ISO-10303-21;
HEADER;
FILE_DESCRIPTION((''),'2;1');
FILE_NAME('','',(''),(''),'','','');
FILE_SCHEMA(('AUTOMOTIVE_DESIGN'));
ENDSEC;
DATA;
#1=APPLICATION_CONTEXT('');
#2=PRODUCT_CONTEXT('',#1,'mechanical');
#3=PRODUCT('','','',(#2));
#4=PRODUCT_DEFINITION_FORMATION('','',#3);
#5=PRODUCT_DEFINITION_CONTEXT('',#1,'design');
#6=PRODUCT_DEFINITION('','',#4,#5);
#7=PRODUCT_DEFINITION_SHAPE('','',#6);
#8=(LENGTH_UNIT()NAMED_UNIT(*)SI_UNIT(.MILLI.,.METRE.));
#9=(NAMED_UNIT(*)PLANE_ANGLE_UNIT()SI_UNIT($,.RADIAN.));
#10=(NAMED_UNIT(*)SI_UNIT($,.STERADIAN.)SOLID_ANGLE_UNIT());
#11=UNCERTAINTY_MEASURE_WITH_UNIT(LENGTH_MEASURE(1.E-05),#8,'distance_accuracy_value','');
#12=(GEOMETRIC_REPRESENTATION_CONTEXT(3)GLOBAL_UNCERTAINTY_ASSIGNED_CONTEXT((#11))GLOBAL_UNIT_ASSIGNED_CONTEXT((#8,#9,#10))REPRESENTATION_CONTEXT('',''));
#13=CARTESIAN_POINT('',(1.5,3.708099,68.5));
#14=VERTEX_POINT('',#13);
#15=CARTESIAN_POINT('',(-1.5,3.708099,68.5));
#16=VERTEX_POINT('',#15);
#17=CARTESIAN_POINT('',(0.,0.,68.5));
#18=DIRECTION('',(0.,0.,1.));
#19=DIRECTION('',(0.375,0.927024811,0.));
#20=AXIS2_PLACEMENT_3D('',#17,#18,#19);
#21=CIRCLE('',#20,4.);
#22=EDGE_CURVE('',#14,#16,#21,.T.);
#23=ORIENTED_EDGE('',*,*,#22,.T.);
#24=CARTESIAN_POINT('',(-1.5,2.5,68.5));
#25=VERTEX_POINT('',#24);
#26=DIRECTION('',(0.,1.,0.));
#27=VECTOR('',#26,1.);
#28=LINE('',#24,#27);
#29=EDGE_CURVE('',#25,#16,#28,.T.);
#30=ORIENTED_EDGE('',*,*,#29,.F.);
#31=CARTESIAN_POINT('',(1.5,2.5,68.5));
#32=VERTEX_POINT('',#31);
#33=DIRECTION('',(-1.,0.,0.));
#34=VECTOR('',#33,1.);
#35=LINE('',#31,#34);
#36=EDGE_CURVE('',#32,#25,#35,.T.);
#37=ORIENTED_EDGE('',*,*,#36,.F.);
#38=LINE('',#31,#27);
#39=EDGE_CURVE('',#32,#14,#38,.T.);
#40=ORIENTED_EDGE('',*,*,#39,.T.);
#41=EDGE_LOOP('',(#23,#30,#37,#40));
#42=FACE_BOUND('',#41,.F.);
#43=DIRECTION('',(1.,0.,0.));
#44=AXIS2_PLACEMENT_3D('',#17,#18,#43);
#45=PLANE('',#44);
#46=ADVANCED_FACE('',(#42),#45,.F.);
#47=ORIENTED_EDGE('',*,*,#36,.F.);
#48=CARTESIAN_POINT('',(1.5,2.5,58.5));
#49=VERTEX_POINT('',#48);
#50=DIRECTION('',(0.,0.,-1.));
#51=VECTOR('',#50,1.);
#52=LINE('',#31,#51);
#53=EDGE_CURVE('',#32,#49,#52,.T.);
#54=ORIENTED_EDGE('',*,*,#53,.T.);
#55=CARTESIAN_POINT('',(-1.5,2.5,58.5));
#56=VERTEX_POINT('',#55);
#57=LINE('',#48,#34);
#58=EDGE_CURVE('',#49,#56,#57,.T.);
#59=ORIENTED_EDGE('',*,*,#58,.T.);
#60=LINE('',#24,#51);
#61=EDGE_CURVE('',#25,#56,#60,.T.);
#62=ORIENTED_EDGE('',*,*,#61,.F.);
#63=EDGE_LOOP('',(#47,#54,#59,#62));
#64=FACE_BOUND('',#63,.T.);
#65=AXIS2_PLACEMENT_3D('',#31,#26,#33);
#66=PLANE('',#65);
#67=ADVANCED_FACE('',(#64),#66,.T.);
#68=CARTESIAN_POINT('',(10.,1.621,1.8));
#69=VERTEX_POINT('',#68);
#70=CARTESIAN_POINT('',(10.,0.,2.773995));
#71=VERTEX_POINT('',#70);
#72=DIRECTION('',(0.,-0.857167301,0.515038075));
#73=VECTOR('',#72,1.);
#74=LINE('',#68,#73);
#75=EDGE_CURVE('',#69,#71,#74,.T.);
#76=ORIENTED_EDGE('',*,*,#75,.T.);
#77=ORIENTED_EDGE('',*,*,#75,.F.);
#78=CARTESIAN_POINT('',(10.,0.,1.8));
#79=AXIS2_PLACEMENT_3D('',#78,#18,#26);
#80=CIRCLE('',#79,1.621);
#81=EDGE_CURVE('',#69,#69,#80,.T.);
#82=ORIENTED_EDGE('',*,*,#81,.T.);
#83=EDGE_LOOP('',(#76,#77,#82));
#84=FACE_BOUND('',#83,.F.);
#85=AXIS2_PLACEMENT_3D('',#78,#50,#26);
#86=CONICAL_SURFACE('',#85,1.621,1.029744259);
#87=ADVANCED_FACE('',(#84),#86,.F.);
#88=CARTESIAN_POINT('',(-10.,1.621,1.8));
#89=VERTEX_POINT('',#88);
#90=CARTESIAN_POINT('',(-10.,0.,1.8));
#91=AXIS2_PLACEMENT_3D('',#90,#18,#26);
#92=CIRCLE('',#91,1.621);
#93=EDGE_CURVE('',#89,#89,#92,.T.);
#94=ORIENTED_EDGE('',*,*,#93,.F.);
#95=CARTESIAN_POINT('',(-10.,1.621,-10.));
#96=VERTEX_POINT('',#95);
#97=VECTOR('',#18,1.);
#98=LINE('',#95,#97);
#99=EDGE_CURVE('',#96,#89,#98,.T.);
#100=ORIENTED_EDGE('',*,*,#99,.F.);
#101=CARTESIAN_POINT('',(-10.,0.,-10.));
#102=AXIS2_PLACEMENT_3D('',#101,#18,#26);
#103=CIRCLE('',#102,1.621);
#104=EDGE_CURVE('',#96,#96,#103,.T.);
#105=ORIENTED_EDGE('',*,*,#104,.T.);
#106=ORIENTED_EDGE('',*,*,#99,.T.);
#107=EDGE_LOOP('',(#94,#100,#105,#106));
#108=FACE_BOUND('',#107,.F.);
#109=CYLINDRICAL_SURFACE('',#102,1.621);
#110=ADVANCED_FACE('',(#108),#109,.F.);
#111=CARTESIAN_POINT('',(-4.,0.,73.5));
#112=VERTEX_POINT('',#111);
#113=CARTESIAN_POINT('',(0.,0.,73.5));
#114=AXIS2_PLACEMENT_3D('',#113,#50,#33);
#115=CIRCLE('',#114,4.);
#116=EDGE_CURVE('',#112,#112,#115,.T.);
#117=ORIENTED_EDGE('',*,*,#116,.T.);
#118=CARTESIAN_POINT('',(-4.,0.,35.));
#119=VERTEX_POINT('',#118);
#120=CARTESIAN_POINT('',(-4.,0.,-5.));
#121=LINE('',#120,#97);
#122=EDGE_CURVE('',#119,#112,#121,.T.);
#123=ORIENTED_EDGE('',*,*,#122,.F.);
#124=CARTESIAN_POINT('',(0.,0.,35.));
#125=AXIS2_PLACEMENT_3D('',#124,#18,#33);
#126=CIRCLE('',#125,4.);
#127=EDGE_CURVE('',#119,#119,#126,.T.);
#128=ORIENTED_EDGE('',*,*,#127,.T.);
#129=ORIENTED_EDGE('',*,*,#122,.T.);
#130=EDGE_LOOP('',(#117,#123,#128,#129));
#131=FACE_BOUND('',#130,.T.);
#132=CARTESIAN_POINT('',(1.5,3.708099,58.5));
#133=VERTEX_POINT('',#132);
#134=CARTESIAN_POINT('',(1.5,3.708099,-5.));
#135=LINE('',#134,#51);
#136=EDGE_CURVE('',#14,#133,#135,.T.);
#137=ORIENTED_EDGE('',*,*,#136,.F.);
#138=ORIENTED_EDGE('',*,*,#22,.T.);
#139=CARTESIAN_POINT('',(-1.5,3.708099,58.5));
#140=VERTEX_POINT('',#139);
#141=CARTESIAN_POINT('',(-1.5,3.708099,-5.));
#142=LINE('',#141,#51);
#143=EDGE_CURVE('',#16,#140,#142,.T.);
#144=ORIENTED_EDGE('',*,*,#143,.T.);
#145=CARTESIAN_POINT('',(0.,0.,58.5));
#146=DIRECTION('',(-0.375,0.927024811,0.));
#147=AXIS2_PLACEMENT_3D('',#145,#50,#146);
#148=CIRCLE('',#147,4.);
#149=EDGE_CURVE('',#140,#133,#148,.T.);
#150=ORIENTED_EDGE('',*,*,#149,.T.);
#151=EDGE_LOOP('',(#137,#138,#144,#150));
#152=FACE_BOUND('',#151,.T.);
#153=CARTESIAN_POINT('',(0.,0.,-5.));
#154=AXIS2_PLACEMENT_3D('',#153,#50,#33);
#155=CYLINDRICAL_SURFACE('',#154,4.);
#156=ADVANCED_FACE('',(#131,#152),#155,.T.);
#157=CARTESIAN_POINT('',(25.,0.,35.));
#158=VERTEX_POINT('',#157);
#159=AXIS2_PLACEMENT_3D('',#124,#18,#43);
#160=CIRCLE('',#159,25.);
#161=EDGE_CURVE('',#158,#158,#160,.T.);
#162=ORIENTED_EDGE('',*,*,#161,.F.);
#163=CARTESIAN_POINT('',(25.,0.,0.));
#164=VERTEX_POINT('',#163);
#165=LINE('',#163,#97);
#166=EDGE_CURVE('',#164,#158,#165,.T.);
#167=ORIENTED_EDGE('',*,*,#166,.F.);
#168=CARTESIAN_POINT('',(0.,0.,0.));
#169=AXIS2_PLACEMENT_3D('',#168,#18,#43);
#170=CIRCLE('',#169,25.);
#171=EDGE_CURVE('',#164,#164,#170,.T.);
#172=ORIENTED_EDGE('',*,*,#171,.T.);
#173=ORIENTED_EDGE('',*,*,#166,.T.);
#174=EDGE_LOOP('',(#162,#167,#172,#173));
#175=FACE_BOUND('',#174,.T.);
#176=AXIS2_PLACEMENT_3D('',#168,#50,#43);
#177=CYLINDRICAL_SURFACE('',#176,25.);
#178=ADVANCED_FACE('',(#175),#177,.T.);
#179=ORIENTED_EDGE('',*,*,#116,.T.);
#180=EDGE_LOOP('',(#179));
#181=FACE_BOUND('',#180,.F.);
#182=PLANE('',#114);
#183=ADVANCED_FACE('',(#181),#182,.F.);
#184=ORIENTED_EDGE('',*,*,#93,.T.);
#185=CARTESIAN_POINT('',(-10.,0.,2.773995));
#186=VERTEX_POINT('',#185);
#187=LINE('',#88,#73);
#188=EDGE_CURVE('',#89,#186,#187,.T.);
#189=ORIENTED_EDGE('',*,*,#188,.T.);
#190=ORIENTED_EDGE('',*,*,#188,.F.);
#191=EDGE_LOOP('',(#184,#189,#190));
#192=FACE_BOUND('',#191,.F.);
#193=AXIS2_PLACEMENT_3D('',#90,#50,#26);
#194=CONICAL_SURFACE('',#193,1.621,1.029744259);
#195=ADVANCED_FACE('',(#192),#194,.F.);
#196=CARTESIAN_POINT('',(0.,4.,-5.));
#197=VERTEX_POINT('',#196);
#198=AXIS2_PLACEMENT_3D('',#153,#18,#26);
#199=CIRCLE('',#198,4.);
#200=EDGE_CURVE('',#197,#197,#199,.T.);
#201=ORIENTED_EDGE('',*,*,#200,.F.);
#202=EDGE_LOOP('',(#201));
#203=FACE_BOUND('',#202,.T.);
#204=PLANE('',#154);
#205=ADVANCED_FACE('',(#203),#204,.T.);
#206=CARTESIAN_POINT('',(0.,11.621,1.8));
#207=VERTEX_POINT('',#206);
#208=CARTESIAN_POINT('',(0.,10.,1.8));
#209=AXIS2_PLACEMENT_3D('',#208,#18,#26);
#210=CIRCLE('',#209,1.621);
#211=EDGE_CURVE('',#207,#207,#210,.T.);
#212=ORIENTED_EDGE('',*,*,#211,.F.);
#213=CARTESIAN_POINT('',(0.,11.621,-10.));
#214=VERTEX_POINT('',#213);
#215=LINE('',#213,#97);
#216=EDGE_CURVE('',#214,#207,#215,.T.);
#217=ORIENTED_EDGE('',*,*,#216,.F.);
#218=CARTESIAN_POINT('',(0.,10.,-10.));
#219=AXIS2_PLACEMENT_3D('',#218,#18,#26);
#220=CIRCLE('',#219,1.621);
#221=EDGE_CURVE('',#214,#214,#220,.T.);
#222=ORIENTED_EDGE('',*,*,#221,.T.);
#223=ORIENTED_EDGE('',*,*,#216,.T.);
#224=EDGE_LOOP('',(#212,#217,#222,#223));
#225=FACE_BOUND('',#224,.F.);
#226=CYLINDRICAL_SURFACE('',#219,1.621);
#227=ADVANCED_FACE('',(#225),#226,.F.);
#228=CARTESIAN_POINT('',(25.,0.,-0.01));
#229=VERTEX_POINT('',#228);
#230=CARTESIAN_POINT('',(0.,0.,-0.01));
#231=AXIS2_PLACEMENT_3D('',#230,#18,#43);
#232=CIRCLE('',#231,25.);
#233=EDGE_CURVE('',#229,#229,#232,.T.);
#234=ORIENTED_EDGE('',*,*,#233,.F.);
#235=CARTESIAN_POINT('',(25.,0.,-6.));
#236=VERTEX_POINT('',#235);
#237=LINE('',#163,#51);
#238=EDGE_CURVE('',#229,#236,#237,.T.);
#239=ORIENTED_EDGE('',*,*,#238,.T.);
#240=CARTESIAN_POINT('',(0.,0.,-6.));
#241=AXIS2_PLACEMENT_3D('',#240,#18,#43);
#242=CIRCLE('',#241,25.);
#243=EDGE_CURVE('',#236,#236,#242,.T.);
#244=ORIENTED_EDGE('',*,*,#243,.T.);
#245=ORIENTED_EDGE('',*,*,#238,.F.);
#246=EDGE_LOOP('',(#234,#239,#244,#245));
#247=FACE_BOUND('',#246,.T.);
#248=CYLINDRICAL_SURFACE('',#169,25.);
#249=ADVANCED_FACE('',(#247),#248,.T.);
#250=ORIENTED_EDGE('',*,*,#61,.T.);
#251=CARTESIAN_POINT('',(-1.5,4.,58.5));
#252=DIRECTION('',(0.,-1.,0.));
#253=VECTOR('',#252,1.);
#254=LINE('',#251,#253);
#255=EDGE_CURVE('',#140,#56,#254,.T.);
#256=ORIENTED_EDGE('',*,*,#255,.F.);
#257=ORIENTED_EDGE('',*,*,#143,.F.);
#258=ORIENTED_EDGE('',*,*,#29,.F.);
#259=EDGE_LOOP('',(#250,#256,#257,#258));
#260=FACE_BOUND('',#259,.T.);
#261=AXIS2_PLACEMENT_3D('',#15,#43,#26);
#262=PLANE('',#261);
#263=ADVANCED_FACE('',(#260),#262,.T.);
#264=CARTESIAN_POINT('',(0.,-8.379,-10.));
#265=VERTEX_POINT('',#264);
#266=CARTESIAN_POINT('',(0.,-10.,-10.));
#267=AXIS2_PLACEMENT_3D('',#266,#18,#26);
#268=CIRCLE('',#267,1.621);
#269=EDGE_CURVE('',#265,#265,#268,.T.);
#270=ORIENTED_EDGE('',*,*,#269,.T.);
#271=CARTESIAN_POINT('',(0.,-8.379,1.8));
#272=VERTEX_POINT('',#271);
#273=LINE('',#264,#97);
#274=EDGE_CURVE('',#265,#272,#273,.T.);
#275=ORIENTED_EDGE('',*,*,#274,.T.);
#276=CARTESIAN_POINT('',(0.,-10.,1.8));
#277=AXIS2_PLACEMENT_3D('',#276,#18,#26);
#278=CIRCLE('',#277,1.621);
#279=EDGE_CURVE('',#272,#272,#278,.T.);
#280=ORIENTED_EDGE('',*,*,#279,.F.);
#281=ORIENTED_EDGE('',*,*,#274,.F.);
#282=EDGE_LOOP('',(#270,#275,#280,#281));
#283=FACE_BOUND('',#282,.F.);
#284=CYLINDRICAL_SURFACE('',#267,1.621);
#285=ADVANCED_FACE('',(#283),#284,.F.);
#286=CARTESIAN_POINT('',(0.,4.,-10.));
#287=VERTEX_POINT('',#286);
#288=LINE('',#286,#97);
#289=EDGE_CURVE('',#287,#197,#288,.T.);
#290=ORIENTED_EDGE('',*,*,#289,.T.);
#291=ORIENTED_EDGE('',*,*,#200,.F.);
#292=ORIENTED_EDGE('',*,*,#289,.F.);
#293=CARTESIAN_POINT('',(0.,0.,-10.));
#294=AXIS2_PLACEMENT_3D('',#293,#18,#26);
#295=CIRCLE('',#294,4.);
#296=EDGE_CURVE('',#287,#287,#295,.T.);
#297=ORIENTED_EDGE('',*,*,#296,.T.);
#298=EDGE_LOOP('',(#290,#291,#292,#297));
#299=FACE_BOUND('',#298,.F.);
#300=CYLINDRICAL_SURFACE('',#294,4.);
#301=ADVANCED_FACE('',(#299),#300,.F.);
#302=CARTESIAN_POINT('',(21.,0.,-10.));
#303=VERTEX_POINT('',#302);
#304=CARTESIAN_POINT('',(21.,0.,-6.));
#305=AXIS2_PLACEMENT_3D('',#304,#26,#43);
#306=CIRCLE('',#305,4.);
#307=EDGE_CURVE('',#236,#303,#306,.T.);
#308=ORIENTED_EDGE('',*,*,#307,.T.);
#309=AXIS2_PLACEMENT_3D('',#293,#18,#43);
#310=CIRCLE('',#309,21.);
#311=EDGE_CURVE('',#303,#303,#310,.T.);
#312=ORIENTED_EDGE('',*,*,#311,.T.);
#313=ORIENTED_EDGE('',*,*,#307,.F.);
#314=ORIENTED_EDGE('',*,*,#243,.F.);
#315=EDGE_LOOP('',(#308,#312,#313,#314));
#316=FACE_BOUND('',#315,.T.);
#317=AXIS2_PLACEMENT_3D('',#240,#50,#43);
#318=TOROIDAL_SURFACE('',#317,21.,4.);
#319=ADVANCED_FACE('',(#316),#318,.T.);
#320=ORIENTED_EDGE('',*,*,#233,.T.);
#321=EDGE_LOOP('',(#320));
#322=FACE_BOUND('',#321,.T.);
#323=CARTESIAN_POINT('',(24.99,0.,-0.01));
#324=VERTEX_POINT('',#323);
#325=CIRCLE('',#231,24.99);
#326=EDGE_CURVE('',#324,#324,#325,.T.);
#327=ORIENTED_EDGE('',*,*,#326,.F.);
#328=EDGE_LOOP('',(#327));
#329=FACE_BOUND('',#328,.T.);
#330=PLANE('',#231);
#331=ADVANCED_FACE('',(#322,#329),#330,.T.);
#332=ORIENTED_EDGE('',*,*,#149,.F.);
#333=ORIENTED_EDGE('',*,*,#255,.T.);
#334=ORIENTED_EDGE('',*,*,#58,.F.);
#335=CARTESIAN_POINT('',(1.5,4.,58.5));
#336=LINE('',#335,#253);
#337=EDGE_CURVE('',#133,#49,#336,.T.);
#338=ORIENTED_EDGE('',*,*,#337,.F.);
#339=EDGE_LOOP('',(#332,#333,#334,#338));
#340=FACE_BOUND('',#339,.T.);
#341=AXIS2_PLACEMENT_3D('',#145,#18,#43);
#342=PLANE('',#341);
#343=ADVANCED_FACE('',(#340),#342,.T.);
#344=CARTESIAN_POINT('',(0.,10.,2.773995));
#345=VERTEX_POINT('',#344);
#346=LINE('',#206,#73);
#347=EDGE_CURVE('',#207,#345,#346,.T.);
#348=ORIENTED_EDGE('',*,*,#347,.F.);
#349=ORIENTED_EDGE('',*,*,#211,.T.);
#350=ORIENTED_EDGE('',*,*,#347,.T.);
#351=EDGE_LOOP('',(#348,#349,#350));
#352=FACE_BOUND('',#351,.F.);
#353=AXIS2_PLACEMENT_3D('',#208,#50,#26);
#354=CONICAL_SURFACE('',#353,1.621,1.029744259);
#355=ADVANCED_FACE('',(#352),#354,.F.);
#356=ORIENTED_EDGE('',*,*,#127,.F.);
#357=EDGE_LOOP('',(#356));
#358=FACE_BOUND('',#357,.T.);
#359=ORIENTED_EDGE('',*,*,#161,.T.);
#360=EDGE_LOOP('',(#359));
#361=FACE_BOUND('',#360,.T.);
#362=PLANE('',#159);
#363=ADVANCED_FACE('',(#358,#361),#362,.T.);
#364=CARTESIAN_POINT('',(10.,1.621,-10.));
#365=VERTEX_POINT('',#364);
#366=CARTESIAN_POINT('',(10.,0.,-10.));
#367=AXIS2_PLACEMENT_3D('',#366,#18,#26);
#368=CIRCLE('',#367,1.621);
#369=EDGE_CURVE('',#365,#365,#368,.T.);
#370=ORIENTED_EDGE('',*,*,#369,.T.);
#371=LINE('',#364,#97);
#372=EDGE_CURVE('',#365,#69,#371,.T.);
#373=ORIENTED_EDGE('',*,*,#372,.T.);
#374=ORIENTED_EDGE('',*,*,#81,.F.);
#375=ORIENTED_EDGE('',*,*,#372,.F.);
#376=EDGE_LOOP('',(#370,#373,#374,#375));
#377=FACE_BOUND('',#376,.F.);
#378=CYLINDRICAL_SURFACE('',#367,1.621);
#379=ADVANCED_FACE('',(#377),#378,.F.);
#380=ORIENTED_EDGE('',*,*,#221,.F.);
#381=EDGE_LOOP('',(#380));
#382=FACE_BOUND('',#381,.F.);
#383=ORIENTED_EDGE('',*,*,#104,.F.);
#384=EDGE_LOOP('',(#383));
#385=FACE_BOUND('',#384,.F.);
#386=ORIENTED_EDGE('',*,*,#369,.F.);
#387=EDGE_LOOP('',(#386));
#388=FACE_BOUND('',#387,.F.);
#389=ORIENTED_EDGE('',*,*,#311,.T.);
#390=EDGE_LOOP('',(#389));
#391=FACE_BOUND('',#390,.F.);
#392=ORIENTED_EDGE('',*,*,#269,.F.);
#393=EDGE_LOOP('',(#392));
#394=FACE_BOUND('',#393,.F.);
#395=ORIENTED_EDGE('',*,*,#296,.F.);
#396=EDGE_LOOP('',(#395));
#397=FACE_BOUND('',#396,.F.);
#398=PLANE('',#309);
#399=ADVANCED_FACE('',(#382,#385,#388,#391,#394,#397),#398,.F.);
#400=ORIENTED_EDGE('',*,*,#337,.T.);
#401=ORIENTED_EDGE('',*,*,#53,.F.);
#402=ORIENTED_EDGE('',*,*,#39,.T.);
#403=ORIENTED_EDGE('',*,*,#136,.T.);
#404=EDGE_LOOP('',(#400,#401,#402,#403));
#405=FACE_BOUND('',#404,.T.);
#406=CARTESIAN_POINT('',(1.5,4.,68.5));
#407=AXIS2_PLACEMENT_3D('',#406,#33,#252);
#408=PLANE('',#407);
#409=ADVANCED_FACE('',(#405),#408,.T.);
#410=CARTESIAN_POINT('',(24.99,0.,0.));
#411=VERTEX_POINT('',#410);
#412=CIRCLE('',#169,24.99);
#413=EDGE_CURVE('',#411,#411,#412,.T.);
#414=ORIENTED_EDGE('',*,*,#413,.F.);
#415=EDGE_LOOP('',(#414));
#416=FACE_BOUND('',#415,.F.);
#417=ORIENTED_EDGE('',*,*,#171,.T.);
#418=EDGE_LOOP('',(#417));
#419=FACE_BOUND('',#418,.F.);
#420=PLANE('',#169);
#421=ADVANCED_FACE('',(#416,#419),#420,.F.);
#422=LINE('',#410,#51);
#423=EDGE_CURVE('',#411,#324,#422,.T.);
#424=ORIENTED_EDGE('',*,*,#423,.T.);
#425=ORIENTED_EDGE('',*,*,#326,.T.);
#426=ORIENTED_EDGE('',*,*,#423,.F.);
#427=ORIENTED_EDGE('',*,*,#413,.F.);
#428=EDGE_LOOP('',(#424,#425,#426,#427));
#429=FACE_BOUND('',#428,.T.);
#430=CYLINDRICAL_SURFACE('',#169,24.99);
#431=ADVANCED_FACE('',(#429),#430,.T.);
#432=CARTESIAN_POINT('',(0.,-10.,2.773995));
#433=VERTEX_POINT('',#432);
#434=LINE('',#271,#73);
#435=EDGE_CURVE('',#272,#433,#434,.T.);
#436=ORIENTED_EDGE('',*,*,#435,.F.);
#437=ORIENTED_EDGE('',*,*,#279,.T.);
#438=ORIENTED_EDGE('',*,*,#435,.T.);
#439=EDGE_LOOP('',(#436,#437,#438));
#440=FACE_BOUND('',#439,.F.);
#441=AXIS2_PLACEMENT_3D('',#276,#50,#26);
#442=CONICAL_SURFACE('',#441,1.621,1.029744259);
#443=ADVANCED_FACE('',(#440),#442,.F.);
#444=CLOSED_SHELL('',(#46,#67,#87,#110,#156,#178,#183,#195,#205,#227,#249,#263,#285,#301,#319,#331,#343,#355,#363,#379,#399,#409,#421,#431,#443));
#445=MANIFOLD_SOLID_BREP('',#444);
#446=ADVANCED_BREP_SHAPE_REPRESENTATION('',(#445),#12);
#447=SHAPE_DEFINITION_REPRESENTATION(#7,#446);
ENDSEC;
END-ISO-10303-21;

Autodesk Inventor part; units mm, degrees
ref_plane "YZ Plane" through (0, 0, 0) normal (1, 0, 0) x (0, 1, 0)
sketch "スケッチ1" plane through (0, 0, 0) normal (0, 0, 1) x (1, 0, 0)
  circle A0 centre (0, 0) radius 25
  dimension "d0" = 50
extrude "押し出し1" add sketch "スケッチ1" against normal blind 10
fillet "フィレット1" radius 4 1 edges at (-25, 0, -10)
sketch "スケッチ2" plane through (0, 0, 0) normal (0, 0, 1) x (1, 0, 0)
  circle A0 centre (0, 0) radius 25
  circle A1 centre (0, 0) radius 25 projected
extrude "押し出し2" add sketch "スケッチ2" along normal blind 35
sketch "スケッチ3" plane through (0, 0, 0) normal (0, 0, 1) x (1, 0, 0)
  circle A0 centre (0, 0) radius 25
  circle A1 centre (0, 0) radius 25 projected
  circle A2 centre (0, 0) radius 24.99
  dimension "d6" = 0.01
extrude "押し出し3" cut sketch "スケッチ3" against normal blind 0.01
sketch "スケッチ4" plane through (0, 0, -10) normal (0, 0, -1) x (-1, 0, 0)
  point P0 (0, 0)
  point P1 (0, 0)
hole "穴1" at (0, 0, -10) direction (0, 0, 1) diameter 8 end through all
sketch "スケッチ5" plane through (0, 0, -10) normal (0, 0, -1) x (-1, 0, 0)
  point P0 (0, 0)
  point P1 (0, -10)
  point P2 (10, 0)
  point P3 (0, 10)
  point P4 (-10, 0)
  dimension "d18" = 360
  dimension "d20" = 20
hole "穴2" at (0, -10, -10) at (-10, 0, -10) at (0, 10, -10) at (10, 0, -10) direction (0, 0, 1) diameter 3.242 depth 11.8 tip angle 118 thread size "M4x0.7" class "6H" standard "ISO Metric profile"
ref_plane "作業平面1" through (0, 0, -5) normal (0, 0, -1) x (-1, 0, 0)
sketch "スケッチ6" plane through (0, 0, -5) normal (0, 0, -1) x (-1, 0, 0)
  circle A0 centre (0, 0) radius 4 projected
  circle A1 centre (0, 0) radius 4
  dimension "d29" = 8
extrude "押し出し4" add sketch "スケッチ6" against normal blind 78.5
ref_plane "作業平面2" through (0, 0, 68.5) normal (0, 0, 1) x (1, 0, 0)
sketch "スケッチ7" plane through (0, 0, 68.5) normal (0, 0, 1) x (1, 0, 0)
  line L0 (-1.5, 4) -> (1.5, 4)
  line L1 (1.5, 4) -> (1.5, 2.5)
  line L2 (1.5, 2.5) -> (-1.5, 2.5)
  line L3 (-1.5, 2.5) -> (-1.5, 4)
  circle A0 centre (0, 0) radius 4 projected
  point P0 (0, 2.5)
  dimension "d33" = 3
  dimension "d34" = 1.5
extrude "押し出し5" cut sketch "スケッチ7" against normal blind 10 contours L0 A0 L3 | L0 L1 A0 | A0 L1 L2 L3 picked at (0, 3)
properties part number "Rotator_N5065"
